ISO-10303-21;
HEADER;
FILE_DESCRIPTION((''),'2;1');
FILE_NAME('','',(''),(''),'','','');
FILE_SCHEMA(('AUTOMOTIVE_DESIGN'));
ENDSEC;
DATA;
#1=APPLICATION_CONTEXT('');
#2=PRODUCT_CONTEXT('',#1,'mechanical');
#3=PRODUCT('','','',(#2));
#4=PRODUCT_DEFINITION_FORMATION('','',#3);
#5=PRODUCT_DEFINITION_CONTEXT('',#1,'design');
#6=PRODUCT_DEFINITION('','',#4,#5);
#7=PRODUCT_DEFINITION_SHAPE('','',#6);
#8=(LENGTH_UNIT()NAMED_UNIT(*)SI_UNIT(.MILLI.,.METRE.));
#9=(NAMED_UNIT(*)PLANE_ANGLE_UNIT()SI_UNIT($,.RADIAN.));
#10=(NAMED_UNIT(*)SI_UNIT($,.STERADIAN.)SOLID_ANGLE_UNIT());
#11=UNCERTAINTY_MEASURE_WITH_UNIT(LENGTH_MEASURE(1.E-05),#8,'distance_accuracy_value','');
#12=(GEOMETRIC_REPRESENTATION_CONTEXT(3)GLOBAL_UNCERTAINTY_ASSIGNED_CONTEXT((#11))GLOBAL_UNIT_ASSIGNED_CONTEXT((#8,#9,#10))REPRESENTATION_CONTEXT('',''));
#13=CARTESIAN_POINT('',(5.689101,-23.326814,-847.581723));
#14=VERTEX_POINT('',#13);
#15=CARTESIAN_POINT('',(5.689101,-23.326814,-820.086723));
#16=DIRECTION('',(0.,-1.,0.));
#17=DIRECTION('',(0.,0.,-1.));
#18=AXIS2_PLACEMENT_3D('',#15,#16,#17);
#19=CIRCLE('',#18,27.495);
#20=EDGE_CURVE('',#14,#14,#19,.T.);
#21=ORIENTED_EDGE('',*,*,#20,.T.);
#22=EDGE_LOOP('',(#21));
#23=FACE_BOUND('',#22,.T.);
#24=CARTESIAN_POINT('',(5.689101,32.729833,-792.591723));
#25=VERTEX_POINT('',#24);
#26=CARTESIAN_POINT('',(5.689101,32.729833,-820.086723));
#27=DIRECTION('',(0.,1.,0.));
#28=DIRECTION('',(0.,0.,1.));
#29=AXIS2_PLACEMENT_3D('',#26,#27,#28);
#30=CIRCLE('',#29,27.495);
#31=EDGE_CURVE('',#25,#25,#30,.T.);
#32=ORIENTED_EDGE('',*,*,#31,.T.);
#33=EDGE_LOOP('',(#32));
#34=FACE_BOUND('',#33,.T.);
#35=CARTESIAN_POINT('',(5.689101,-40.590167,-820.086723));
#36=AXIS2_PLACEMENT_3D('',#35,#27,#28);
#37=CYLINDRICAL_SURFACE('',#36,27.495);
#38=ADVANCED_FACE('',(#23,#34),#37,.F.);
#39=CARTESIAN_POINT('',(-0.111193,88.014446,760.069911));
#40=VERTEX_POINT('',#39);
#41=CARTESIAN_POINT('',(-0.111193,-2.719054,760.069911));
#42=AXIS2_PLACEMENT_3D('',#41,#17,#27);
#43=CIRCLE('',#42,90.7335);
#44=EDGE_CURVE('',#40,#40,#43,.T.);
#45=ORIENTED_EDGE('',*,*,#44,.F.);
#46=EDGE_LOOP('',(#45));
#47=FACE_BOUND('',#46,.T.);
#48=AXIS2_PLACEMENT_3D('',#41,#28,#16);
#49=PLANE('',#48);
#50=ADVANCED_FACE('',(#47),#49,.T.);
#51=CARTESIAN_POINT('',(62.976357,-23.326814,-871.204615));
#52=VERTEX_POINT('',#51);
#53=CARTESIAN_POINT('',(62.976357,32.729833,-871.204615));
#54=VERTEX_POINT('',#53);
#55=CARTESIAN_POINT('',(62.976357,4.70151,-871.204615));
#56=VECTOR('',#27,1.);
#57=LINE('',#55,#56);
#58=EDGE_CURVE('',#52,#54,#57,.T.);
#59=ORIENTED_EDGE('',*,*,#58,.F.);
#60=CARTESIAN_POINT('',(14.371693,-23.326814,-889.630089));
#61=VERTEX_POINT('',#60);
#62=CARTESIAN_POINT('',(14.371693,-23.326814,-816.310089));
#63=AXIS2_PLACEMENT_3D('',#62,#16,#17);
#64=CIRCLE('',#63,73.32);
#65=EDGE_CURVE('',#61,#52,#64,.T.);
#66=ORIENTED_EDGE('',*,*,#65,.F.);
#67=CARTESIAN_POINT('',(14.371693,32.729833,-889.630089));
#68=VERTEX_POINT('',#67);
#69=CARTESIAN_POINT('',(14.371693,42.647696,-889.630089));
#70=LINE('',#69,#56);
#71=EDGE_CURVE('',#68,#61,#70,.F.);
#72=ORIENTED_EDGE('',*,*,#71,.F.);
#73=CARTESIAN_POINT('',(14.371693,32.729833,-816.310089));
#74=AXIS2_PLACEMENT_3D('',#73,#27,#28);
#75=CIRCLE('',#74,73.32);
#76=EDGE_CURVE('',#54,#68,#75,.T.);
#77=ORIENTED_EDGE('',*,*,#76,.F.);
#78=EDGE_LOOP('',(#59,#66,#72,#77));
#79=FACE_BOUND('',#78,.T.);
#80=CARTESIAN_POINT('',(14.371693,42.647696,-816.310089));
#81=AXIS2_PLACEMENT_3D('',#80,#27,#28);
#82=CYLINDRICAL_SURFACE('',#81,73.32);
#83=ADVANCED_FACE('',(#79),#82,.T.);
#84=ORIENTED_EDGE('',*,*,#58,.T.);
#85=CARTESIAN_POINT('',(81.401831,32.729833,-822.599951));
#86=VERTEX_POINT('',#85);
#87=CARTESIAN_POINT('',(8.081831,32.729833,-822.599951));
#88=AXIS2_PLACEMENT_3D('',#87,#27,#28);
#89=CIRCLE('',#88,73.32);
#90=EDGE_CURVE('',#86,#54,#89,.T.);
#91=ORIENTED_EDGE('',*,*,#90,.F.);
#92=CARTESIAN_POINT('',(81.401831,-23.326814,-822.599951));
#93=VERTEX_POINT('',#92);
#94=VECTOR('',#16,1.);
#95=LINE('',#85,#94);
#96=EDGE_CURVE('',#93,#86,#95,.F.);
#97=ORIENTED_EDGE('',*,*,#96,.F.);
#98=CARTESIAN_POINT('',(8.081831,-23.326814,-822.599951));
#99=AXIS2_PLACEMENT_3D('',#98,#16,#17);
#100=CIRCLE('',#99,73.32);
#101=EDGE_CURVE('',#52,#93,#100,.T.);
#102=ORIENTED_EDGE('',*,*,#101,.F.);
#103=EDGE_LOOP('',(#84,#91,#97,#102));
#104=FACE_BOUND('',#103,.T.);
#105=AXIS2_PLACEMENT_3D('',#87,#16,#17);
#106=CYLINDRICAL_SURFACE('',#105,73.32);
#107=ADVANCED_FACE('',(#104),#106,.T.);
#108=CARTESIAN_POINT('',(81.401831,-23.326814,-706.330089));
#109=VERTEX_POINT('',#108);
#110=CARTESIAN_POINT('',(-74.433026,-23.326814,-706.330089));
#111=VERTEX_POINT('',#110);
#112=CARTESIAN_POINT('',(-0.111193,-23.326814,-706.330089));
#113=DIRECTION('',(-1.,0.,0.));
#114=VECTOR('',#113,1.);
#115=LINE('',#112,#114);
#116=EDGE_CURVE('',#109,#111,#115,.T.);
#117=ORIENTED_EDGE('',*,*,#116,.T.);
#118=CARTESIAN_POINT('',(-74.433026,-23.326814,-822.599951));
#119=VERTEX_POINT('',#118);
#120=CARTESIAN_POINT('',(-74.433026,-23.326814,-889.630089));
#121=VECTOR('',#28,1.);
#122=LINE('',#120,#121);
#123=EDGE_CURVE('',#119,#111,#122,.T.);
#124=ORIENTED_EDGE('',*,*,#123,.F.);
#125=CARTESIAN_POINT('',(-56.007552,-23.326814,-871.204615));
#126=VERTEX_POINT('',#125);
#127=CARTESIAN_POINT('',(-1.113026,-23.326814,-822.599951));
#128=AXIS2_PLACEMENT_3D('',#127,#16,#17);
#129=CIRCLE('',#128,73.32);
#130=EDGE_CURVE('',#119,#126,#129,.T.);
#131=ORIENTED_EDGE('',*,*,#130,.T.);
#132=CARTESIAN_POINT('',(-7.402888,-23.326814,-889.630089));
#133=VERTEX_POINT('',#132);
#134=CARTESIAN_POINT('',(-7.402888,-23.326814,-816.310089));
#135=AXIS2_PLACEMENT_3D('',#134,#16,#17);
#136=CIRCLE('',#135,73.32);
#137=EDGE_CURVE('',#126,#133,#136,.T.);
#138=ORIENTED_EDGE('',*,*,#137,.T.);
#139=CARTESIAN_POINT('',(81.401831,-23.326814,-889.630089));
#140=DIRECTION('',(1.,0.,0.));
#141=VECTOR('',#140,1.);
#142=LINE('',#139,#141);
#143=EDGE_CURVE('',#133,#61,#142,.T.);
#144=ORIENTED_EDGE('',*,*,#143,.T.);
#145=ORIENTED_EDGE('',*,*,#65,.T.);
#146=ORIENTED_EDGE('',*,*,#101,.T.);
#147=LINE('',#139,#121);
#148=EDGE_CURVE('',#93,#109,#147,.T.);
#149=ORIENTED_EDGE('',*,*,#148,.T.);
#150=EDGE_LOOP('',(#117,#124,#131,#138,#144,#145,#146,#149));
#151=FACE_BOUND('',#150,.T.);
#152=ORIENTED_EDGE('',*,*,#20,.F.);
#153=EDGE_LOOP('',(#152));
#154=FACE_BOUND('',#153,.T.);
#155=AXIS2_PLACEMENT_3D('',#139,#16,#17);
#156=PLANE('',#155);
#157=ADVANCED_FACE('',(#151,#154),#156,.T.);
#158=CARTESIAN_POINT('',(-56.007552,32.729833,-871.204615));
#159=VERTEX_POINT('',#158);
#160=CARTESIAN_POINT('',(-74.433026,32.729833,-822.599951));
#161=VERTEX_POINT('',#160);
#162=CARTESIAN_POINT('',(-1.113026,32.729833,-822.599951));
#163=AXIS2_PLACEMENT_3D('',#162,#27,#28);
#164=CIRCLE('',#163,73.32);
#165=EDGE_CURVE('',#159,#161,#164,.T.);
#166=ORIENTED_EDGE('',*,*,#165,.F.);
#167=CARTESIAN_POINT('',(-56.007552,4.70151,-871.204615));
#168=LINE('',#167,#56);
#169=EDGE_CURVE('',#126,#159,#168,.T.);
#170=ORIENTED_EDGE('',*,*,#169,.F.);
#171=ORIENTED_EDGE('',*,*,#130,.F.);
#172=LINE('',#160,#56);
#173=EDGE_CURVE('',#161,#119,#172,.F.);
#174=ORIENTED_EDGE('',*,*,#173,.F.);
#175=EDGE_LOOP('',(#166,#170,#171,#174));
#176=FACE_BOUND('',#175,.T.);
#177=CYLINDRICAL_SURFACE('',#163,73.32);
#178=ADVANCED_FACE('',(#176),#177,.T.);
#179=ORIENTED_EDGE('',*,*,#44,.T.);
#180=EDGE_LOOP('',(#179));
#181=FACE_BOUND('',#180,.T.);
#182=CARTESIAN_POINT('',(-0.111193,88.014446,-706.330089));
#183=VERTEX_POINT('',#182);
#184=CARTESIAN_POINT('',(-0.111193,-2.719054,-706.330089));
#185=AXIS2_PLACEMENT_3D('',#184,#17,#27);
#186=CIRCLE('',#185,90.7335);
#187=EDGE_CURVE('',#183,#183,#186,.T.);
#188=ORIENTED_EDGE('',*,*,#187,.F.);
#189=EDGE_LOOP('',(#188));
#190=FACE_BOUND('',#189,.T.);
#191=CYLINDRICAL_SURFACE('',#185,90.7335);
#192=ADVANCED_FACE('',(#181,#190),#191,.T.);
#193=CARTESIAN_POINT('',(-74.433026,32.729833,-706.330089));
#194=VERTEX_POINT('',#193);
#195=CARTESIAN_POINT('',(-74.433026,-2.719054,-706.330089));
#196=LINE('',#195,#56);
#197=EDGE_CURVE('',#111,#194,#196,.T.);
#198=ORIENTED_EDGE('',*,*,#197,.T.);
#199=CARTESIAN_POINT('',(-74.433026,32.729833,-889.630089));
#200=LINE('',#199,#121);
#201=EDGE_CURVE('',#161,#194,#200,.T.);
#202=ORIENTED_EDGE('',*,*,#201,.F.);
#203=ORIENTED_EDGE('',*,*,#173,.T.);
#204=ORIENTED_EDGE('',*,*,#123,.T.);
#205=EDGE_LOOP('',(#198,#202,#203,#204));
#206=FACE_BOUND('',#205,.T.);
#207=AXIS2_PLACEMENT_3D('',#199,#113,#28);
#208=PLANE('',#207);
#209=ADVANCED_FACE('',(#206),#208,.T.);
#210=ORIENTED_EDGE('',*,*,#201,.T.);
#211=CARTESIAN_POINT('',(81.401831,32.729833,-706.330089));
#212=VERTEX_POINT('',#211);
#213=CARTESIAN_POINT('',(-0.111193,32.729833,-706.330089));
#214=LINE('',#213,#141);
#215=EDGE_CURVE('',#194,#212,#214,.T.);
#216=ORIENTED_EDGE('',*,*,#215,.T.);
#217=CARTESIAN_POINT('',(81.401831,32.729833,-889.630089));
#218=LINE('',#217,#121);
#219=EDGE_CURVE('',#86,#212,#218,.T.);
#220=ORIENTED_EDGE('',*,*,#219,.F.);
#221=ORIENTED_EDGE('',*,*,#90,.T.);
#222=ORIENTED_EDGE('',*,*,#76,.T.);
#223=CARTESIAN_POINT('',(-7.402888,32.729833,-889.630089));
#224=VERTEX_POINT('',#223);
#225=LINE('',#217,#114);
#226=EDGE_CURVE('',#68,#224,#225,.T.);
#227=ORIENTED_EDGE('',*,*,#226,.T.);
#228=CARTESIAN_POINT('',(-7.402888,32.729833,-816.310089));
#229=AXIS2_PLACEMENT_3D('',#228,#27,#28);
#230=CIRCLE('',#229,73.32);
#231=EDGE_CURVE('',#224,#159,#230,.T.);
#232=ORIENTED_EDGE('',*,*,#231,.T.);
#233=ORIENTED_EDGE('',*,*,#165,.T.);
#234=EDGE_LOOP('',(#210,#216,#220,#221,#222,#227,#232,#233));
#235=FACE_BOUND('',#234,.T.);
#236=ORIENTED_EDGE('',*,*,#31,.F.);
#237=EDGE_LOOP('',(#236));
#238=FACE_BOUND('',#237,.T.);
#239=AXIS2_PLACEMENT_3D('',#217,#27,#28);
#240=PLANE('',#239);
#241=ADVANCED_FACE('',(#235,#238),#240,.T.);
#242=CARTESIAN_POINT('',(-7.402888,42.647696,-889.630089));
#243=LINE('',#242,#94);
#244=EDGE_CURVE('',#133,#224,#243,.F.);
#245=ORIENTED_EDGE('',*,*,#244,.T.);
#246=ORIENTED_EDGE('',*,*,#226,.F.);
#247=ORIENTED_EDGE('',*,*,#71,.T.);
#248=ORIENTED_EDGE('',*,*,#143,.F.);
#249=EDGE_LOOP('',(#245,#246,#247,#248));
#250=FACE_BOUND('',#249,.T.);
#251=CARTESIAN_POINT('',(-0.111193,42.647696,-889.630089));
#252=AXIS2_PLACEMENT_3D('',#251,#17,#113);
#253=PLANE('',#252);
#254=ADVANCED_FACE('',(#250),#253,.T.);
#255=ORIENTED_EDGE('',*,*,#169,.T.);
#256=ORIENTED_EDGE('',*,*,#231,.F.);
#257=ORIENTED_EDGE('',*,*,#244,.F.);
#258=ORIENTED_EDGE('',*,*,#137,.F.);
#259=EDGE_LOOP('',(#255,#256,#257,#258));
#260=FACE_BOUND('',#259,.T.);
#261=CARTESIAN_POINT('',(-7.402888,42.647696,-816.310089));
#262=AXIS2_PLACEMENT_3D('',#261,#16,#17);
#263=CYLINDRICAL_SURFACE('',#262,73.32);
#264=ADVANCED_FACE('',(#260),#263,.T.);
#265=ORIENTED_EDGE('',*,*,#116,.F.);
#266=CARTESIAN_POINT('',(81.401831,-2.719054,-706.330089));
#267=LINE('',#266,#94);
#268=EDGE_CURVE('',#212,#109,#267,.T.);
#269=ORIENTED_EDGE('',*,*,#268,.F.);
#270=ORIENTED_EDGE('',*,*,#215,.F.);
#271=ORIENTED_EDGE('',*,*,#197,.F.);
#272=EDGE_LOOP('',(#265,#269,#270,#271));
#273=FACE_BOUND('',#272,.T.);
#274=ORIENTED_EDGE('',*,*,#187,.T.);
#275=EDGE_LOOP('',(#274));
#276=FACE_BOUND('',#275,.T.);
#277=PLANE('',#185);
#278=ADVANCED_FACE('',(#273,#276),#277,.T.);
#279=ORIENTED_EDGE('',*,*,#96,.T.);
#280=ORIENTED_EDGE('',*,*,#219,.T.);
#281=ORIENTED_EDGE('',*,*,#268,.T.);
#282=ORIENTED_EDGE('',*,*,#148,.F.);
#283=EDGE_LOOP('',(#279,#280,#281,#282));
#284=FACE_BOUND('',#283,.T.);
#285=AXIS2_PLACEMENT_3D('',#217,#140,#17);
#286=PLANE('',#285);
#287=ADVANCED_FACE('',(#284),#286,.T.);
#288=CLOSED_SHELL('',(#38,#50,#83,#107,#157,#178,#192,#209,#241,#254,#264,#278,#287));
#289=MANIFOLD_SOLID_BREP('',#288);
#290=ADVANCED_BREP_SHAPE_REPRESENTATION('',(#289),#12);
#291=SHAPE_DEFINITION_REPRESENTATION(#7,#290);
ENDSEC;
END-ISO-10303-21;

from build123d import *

# Parameters (mm, degrees)
SKETCH1_W           = 80
SKETCH1_H           = 4.95
SKETCH2_W           = 8.501628875
SKETCH2_H           = 3.058191312
BOSS_EXTRUDE1_DEPTH = 50
CHAMFER1_SIZE       = 2
FILLET1_R           = 4
HOLE1_START         = -3.599264013
HOLE1_OUTLINE_R     = 1.5
HOLE1_DEPTH         = 3.058191312
SCALE1_SCALE        = 18.33


# Read off the part's stored shape, not the designer's step: Hole1
with BuildPart() as part:
    # Sketch1 → Revolve1 (revolve)
    with BuildSketch(Plane(origin=(0, 0, 0), x_dir=(0, 0, -1), z_dir=(1, 0, 0))):
        Rectangle(SKETCH1_W, SKETCH1_H)
    revolve(axis=Axis((0, -2.475, -40), (0, 0, 1)))

    # Sketch2 → Boss-Extrude1 (add)
    with BuildSketch(Plane.XY):
        with Locations((0.196159038, -2.070168357)):
            Rectangle(SKETCH2_W, SKETCH2_H)
    extrude(amount=-BOSS_EXTRUDE1_DEPTH)

    # Chamfer1
    chamfer1_edges = [part.edges().sort_by_distance(p)[0] for p in [
        (4.446973476, -2.070168357, -50),
        (-4.054655399, -2.070168357, -50),
    ]]
    chamfer(chamfer1_edges, length=CHAMFER1_SIZE)

    # Fillet1
    # the kernel refuses this fillet: 4 mm, written as the material it takes off along each edge
    with BuildSketch(Plane(origin=(-2.054655399, 3.601062923, -50), x_dir=(-0.7071067811865491, 0, 0.7071067811865459), z_dir=(0, -1, 0)), Plane(origin=(4.446973476, -7.741399637, -48), x_dir=(0, 0, 1), z_dir=(0, 1, 0)), Plane(origin=(-4.054655399, 3.601062923, -48), x_dir=(0, 0, 1), z_dir=(0, -1, 0))) as fillet1_piece_1:
        with BuildLine():
            CenterArc((FILLET1_R * 0.414213562373, -FILLET1_R), FILLET1_R, 90, 45)
            Line((-FILLET1_R * 0.292893218813, -FILLET1_R * 0.292893218813), (0, 0))
            Line((0, 0), (FILLET1_R * 0.414213562373, 0))
        make_face()
    extrude(amount=11.34246256, mode=Mode.SUBTRACT)
    with BuildSketch(Plane(origin=(2.446973476, -7.741399637, -50), x_dir=(-1, 0, 0), z_dir=(0, 1, 0))) as fillet1_piece_2:
        with BuildLine():
            CenterArc((FILLET1_R * 0.414213562373, FILLET1_R), FILLET1_R, 225, 45)
            Line((-FILLET1_R * 0.292893218813, FILLET1_R * 0.292893218813), (0, 0))
            Line((0, 0), (FILLET1_R * 0.414213562373, 0))
        make_face()
    extrude(amount=11.34246256, mode=Mode.SUBTRACT)

    # Hole1 outline → Hole1 (cut)
    with BuildSketch(Plane(origin=(0, 0, 0), x_dir=(1, 0, 0), z_dir=(0, 1, 0)).offset(HOLE1_START)):
        with Locations((0.316437215, 46.206035657)):
            Circle(HOLE1_OUTLINE_R)
    extrude(amount=HOLE1_DEPTH, mode=Mode.SUBTRACT)


with BuildPart() as part_1:
    # Scale1: scaled about (0.006416206, -2.460917228, -1.550485335)
    add(part.part.scale(SCALE1_SCALE).moved(Location((-0.11119285, 42.647695561, 26.869910856))))


solid = part_1.part
